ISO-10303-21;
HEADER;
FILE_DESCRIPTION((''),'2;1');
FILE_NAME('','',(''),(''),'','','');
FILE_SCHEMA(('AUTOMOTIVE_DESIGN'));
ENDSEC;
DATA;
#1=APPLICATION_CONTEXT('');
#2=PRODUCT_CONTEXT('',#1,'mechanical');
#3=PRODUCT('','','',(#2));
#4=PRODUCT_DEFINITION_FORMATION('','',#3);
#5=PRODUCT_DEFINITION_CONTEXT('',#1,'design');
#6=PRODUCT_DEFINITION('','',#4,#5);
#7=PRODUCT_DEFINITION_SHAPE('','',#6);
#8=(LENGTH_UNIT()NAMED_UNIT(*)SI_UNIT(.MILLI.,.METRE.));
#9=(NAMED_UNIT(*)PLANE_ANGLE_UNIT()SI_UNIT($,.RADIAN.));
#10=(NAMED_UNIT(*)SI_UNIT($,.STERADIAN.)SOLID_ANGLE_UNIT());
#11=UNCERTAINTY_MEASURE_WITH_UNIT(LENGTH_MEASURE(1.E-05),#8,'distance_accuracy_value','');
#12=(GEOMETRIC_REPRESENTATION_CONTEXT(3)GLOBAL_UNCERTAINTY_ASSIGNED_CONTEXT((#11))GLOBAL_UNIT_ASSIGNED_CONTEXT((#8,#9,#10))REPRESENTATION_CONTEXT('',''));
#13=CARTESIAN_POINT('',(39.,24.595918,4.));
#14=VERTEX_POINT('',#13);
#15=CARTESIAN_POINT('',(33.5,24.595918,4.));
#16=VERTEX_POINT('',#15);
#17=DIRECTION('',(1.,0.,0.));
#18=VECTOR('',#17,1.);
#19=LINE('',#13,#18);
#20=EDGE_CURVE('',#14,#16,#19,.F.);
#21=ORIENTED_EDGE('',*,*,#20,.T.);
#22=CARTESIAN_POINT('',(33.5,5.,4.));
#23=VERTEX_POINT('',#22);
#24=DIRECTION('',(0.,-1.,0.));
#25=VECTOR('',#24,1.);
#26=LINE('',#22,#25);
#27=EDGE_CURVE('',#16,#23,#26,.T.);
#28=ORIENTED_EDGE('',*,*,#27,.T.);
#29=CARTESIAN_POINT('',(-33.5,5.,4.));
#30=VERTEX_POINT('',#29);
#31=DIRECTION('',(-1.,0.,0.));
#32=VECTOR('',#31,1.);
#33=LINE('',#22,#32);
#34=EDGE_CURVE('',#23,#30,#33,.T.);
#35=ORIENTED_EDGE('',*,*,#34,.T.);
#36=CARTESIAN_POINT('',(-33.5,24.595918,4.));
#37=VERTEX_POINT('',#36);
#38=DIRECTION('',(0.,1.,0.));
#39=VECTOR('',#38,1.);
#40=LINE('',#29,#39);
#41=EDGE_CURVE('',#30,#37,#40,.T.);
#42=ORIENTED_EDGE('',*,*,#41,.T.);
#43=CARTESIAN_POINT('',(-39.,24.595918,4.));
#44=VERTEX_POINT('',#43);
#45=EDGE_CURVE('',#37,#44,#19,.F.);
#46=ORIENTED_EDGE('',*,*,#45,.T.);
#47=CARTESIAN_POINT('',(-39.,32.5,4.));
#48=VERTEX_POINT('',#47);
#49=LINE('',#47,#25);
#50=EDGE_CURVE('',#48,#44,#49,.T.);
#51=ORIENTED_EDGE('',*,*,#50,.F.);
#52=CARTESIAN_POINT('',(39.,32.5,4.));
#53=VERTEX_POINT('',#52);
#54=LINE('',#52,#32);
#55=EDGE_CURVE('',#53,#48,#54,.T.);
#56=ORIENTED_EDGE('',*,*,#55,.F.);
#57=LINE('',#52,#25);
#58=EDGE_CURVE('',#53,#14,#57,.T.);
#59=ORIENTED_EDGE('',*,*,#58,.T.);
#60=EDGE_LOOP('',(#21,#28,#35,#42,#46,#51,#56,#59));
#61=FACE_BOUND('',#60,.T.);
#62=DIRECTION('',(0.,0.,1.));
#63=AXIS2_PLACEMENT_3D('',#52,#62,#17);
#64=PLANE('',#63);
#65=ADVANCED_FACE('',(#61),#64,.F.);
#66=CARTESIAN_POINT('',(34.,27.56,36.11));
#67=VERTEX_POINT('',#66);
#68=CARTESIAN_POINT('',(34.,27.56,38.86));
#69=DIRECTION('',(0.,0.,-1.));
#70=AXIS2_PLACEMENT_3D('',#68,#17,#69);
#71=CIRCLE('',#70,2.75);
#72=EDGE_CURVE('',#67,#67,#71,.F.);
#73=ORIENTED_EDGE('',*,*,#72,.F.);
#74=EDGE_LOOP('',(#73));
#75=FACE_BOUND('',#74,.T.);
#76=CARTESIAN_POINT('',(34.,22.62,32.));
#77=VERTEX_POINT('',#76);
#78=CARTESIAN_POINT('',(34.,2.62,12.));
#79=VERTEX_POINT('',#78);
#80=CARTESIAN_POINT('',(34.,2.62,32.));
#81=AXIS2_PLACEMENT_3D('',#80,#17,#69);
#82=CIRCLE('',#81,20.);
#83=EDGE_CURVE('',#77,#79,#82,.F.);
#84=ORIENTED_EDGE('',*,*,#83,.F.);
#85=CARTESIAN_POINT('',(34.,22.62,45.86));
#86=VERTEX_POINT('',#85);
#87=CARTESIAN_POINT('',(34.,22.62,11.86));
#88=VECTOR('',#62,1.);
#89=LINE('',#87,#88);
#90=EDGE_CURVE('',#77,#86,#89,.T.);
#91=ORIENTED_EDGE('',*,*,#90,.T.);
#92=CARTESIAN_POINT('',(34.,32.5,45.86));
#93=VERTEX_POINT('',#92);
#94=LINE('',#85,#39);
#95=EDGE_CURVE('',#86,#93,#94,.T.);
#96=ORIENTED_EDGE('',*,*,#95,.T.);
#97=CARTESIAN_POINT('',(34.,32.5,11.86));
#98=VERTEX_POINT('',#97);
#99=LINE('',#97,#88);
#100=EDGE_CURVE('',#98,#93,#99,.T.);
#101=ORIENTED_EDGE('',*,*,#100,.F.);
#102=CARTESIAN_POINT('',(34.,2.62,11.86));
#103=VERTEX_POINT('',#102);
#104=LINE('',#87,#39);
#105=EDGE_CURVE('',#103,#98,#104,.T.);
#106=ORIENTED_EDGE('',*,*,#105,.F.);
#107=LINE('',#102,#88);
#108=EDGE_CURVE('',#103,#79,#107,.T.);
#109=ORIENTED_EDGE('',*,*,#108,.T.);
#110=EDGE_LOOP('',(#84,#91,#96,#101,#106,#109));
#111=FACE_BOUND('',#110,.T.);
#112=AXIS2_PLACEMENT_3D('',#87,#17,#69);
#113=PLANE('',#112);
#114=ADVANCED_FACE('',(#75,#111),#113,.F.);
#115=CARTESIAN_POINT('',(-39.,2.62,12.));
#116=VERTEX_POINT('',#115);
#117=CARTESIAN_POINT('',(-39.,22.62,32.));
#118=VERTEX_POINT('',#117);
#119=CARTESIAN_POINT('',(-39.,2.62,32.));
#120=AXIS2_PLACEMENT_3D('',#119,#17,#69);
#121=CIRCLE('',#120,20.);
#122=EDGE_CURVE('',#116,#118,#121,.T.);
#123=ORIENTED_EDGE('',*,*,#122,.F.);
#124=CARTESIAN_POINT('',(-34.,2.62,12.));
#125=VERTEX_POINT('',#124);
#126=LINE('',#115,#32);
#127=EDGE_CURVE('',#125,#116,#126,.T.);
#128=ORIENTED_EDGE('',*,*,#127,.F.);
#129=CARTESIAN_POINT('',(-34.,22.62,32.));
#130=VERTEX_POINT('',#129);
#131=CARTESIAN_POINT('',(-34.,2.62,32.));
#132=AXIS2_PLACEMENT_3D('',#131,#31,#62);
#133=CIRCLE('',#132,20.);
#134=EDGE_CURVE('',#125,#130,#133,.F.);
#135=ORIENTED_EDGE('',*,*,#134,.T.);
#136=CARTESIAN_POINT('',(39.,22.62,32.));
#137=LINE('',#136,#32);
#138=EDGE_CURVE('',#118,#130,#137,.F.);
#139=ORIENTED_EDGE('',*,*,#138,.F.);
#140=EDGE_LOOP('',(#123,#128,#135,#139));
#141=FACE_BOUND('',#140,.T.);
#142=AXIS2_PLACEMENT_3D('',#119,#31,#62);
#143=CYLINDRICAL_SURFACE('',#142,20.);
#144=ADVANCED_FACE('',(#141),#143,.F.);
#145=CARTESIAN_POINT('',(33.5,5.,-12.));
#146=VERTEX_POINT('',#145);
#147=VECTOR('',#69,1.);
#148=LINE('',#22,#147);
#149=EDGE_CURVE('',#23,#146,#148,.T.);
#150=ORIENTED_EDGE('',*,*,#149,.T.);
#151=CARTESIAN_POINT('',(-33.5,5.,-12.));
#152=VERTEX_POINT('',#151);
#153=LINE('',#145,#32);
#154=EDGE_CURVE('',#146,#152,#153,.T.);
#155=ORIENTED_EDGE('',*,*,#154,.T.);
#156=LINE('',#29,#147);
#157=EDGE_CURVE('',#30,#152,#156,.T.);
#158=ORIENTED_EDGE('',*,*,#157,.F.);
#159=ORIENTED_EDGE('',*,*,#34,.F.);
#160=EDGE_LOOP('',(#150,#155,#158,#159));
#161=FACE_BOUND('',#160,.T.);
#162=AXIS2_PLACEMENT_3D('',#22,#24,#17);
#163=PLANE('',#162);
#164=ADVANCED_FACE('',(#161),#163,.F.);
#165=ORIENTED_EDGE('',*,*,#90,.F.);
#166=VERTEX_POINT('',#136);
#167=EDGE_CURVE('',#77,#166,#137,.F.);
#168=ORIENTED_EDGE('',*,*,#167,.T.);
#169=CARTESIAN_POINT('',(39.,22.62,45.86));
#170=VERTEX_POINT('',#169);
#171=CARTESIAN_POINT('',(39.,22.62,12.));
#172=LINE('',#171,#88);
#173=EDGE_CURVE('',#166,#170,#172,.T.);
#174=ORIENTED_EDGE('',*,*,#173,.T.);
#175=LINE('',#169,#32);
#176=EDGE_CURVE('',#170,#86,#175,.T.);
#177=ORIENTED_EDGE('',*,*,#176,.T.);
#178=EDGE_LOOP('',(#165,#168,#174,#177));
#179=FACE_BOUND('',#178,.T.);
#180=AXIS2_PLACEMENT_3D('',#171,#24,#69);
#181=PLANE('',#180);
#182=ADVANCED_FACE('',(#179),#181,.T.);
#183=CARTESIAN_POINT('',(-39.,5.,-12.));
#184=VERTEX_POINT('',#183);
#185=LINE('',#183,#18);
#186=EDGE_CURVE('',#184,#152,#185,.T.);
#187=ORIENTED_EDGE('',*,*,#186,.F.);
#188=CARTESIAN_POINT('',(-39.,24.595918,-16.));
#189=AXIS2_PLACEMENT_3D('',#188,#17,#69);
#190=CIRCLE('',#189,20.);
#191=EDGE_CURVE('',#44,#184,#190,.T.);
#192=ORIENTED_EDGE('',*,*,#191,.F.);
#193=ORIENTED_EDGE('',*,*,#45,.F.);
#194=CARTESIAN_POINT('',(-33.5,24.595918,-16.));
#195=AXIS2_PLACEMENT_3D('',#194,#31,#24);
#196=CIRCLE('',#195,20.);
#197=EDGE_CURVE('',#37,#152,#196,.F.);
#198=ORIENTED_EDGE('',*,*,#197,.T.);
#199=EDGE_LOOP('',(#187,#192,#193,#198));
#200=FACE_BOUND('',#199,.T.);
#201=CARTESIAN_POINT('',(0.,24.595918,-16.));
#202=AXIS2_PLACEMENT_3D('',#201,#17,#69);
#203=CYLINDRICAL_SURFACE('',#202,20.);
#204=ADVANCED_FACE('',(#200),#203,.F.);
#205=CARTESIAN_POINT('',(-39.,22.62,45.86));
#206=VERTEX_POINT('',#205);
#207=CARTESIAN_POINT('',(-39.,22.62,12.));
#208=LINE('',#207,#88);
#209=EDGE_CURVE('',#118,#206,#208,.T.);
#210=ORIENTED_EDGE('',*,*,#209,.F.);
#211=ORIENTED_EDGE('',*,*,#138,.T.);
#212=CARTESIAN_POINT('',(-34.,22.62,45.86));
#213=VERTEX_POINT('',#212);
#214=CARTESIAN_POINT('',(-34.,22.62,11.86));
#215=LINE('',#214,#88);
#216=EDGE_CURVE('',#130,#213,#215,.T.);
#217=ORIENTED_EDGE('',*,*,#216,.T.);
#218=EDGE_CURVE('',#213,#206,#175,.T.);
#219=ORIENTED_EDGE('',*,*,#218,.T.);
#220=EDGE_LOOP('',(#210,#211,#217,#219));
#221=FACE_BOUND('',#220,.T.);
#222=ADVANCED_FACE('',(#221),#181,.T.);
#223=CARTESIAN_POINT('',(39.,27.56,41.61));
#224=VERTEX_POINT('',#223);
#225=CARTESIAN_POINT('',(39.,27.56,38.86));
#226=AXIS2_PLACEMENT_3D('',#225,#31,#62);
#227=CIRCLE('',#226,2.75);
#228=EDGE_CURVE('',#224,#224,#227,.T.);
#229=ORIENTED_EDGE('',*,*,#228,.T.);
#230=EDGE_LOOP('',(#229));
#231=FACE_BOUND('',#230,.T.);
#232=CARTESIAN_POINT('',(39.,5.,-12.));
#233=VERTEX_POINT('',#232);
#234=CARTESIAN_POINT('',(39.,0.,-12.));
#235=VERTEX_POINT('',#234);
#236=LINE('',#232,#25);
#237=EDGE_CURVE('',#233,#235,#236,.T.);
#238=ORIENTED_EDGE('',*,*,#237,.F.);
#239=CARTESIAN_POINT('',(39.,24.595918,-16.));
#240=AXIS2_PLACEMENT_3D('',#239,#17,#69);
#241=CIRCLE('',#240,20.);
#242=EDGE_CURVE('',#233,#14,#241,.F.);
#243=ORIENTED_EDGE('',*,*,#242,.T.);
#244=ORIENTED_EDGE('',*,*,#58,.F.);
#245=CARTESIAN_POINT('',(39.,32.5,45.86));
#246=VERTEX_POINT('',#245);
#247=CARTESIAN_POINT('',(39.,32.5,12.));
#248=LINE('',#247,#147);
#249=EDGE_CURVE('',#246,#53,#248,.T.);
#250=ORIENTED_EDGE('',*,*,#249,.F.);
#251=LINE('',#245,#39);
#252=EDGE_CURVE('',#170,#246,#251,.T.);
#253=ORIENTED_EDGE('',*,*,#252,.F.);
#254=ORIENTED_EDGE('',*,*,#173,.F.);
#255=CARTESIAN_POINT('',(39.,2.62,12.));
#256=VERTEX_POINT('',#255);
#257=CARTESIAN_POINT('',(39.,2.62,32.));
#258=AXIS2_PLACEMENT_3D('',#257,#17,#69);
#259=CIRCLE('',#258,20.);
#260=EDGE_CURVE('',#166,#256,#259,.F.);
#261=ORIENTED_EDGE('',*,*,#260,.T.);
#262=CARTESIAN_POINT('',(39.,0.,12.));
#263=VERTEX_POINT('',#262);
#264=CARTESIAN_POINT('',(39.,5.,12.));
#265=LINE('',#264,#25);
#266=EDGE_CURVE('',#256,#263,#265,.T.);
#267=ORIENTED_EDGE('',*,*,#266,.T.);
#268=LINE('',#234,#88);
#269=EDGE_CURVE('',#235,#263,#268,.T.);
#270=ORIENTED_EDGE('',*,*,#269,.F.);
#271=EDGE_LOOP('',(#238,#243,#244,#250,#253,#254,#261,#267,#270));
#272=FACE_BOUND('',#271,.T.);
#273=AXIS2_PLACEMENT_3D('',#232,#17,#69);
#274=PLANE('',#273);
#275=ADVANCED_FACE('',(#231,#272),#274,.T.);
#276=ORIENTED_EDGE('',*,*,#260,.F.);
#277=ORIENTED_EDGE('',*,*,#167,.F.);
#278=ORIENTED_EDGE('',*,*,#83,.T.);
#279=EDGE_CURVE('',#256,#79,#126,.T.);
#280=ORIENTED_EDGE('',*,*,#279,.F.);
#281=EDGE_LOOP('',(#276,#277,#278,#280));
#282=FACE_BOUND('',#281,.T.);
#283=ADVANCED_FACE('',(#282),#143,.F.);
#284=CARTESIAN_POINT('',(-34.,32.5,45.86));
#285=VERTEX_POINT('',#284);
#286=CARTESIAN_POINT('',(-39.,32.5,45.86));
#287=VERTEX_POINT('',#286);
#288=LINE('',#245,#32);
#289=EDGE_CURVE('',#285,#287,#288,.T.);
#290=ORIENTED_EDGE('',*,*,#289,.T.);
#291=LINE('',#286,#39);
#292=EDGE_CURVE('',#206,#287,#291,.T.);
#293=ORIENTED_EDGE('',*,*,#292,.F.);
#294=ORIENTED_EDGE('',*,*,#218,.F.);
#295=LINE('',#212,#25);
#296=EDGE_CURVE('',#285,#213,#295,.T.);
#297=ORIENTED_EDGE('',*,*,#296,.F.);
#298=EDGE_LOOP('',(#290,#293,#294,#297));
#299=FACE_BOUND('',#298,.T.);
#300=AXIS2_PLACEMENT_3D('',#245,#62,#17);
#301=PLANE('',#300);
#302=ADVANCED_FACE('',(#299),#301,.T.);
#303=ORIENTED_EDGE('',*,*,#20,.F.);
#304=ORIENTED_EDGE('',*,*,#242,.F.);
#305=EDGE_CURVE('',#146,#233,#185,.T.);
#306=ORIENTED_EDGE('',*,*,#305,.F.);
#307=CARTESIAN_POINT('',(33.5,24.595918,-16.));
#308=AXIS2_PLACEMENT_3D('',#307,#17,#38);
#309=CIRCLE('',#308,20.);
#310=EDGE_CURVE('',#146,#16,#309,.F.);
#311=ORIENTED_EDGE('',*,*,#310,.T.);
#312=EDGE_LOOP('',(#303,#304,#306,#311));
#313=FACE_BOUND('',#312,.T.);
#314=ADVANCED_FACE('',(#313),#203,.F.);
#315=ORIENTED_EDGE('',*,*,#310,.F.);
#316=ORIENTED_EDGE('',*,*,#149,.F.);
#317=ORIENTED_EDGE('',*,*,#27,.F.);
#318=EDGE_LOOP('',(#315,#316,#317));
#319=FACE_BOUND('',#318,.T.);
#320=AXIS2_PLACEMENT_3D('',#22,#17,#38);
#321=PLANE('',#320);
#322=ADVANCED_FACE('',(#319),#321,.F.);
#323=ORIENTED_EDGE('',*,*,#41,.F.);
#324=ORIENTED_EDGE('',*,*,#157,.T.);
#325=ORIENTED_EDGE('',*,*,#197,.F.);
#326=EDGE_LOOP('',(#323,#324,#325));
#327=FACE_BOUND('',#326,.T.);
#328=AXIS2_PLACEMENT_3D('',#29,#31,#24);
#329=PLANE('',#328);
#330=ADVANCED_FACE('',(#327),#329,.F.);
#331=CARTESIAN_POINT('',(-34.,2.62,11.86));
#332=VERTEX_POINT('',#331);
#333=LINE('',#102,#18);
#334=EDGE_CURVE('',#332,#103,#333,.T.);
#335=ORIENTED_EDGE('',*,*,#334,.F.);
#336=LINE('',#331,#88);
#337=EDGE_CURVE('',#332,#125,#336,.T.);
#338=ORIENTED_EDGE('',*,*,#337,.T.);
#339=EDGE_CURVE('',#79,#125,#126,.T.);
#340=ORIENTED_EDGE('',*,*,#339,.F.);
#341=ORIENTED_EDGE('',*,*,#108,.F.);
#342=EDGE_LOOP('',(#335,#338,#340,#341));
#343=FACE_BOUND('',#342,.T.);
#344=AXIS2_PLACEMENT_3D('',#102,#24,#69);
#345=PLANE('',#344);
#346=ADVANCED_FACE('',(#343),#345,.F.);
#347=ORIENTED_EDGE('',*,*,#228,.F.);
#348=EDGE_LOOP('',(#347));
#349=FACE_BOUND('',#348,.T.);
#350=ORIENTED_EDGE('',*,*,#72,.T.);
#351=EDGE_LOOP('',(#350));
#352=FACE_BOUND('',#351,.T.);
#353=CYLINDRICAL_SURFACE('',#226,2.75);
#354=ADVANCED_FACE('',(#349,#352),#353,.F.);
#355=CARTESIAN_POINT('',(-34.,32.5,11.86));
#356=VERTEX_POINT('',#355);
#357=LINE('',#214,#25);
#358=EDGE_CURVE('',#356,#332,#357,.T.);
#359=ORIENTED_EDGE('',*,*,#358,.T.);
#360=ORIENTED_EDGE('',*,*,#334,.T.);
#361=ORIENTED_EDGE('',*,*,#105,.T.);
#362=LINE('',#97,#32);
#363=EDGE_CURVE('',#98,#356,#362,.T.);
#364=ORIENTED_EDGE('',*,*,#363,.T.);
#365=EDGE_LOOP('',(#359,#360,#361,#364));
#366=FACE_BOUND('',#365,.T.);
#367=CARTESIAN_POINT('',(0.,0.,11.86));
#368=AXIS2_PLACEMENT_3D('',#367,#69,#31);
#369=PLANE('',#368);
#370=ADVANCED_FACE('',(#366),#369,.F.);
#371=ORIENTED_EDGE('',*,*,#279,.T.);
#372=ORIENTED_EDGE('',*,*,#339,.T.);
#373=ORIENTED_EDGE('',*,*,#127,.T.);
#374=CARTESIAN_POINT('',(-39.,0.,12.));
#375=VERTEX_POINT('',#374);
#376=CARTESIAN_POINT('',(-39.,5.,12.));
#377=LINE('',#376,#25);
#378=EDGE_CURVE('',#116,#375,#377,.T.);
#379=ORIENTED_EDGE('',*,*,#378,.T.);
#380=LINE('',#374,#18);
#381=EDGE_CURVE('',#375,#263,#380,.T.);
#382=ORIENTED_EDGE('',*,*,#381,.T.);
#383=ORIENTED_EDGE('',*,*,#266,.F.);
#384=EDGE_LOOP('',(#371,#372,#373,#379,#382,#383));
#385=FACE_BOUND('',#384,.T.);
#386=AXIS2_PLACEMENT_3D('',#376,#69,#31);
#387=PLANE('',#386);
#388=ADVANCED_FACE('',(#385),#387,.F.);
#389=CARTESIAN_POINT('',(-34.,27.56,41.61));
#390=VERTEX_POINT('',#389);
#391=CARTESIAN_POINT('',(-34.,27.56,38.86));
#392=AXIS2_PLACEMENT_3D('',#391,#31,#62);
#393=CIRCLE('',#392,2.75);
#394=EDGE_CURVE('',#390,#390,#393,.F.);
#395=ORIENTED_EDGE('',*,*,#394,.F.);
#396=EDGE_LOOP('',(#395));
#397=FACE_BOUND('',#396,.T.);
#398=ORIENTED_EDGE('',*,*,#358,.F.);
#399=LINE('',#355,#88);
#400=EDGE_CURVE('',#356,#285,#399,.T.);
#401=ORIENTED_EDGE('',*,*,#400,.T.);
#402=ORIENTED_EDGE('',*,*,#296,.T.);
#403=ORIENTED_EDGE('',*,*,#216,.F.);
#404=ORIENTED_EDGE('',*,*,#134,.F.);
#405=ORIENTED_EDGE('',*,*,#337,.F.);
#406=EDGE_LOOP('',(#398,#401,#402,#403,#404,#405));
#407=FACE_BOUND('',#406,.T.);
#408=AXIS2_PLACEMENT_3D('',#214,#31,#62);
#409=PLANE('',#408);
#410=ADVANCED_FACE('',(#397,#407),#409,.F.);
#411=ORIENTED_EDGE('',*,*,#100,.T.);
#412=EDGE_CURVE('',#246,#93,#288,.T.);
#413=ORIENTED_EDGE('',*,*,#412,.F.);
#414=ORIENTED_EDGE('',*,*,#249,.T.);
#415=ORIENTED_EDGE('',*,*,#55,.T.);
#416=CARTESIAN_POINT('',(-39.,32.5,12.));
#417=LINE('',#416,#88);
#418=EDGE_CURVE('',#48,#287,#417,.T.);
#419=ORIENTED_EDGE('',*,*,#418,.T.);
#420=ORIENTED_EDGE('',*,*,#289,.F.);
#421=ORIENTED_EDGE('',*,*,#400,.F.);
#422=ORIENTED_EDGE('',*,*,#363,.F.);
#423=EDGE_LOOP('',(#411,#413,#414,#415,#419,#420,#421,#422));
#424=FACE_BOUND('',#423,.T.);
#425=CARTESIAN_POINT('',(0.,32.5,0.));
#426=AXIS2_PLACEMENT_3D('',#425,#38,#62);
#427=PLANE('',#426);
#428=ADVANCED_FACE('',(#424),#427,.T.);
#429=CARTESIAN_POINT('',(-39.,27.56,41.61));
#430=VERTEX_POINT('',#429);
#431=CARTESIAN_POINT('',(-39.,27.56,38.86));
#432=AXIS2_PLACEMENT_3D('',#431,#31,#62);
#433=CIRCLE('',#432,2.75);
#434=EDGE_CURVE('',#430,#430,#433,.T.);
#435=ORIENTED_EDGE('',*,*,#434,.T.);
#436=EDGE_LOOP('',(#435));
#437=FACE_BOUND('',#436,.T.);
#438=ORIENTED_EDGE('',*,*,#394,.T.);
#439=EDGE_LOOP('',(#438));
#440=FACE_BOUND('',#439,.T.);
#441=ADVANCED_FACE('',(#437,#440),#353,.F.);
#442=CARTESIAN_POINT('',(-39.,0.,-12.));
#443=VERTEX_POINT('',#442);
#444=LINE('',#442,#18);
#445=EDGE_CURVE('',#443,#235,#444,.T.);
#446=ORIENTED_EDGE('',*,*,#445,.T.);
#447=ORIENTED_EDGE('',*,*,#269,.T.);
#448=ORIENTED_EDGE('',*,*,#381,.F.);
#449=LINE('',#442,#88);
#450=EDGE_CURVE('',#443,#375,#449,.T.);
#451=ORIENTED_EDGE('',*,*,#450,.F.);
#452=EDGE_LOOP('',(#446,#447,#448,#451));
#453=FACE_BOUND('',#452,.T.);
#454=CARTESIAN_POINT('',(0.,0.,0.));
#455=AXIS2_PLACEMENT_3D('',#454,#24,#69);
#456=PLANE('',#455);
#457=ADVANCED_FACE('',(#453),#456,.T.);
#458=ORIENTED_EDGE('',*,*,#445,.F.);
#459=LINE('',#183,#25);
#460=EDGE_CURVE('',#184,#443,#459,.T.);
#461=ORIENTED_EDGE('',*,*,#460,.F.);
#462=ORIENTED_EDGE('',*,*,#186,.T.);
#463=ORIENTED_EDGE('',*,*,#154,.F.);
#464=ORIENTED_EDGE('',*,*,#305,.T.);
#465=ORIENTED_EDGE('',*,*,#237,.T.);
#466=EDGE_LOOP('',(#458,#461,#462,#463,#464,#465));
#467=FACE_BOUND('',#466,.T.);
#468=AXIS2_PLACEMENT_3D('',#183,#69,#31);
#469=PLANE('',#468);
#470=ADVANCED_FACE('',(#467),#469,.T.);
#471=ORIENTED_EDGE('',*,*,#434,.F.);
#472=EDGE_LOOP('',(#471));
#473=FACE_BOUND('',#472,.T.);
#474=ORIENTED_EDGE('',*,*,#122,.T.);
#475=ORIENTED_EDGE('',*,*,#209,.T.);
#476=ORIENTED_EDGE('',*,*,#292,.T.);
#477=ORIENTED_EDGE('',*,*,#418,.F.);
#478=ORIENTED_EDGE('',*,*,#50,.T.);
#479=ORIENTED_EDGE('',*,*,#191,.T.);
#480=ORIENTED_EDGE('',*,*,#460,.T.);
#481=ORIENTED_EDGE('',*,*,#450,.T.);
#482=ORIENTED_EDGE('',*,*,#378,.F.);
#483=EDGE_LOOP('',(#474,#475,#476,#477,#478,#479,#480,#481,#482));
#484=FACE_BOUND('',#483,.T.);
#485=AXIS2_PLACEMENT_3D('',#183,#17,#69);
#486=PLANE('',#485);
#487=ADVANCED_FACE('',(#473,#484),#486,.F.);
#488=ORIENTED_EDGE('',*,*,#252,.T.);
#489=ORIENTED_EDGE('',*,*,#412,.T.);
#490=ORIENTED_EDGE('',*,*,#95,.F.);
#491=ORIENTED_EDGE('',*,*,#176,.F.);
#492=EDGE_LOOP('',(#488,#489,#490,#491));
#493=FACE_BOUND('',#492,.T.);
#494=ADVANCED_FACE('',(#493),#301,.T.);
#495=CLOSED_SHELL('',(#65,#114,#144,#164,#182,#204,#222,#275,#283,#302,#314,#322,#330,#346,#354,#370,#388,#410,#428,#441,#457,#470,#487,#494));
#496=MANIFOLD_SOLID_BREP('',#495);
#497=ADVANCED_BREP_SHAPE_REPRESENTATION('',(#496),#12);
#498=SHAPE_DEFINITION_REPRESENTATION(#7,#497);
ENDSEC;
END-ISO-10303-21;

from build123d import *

# Parameters (mm, degrees)
SKETCH1_W           = 78
SKETCH1_H           = 24
BOSS_EXTRUDE1_DEPTH = 5
SKETCH2_W           = 78
SKETCH2_H           = 8
BOSS_EXTRUDE2_DEPTH = 27.5
FILLET1_R           = 20
SKETCH3_W           = 67
SKETCH3_H           = 19.595917942
CUT_EXTRUDE1_DEPTH  = 16
SKETCH4_W           = 33.86
SKETCH4_H           = 9.88
SKETCH4_R           = 2.75
BOSS_EXTRUDE3_DEPTH = 78
FILLET2_R           = 20
SKETCH5_W           = 68
SKETCH5_H           = 20
CUT_EXTRUDE2_DEPTH  = 34
SKETCH6_W           = 68
SKETCH6_H           = 9.88
CUT_EXTRUDE3_DEPTH  = 34


with BuildPart() as part:
    # Sketch1 → Boss-Extrude1 (new body)
    with BuildSketch(Plane(origin=(0, 0, 0), x_dir=(1, 0, 0), z_dir=(0, 1, 0))):
        Rectangle(SKETCH1_W, SKETCH1_H)
    extrude(amount=BOSS_EXTRUDE1_DEPTH)

    # Sketch2 → Boss-Extrude2 (add)
    with BuildSketch(Plane(origin=(0, 5, 0), x_dir=(1, 0, 0), z_dir=(0, 1, 0))):
        with Locations((0, -8)):
            Rectangle(SKETCH2_W, SKETCH2_H)
    extrude(amount=BOSS_EXTRUDE2_DEPTH)

    # Fillet1
    # the kernel refuses this fillet: 20 mm, written as the material it adds along each edge
    with BuildSketch(Plane(origin=(39, 5, 4), x_dir=(0, 0, -1), z_dir=(-1, 0, 0))) as fillet1_piece_1:
        with BuildLine():
            CenterArc((20, -19.595917942), FILLET1_R, 101.536959033, 78.463040967)
            Line((0, -19.595917942), (-0.4, -19.595917942))
            Line((-0.4, -19.595917942), (-0.4, 0))
            Line((-0.4, 0), (0, 0.4))
            ThreePointArc((0, 0.4), (8, 0.4), (15.92, 0.391918359))
            Line((15.92, 0.391918359), (16, 0))
        make_face()
    extrude(amount=78)

    # Sketch3 → Cut-Extrude1 (cut)
    with BuildSketch(Plane(origin=(0, 0, -12), x_dir=(-1, 0, 0), z_dir=(0, 0, -1))):
        with Locations((0, 14.797958971)):
            Rectangle(SKETCH3_W, SKETCH3_H)
    extrude(amount=-CUT_EXTRUDE1_DEPTH, mode=Mode.SUBTRACT)

    # Sketch4 → Boss-Extrude3 (add)
    with BuildSketch(Plane.ZY.offset(39)):
        with Locations((28.93, 27.56)):
            Rectangle(SKETCH4_W, SKETCH4_H)
        with Locations((38.86, 27.56)):
            Circle(SKETCH4_R, mode=Mode.SUBTRACT)
    extrude(amount=-BOSS_EXTRUDE3_DEPTH)

    # Fillet2
    fillet2_edges = [part.edges().sort_by_distance(p)[0] for p in [
        (0, 22.62, 12),
    ]]
    fillet(fillet2_edges, radius=FILLET2_R)

    # Sketch5 → Cut-Extrude2 (cut)
    with BuildSketch(Plane.XY.offset(45.86)):
        with Locations((0, 12.62)):
            Rectangle(SKETCH5_W, SKETCH5_H)
    extrude(amount=-CUT_EXTRUDE2_DEPTH, mode=Mode.SUBTRACT)

    # Sketch6 → Cut-Extrude3 (cut)
    with BuildSketch(Plane.XY.offset(45.86)):
        with Locations((0, 27.56)):
            Rectangle(SKETCH6_W, SKETCH6_H)
    extrude(amount=-CUT_EXTRUDE3_DEPTH, mode=Mode.SUBTRACT)


solid = part.part
